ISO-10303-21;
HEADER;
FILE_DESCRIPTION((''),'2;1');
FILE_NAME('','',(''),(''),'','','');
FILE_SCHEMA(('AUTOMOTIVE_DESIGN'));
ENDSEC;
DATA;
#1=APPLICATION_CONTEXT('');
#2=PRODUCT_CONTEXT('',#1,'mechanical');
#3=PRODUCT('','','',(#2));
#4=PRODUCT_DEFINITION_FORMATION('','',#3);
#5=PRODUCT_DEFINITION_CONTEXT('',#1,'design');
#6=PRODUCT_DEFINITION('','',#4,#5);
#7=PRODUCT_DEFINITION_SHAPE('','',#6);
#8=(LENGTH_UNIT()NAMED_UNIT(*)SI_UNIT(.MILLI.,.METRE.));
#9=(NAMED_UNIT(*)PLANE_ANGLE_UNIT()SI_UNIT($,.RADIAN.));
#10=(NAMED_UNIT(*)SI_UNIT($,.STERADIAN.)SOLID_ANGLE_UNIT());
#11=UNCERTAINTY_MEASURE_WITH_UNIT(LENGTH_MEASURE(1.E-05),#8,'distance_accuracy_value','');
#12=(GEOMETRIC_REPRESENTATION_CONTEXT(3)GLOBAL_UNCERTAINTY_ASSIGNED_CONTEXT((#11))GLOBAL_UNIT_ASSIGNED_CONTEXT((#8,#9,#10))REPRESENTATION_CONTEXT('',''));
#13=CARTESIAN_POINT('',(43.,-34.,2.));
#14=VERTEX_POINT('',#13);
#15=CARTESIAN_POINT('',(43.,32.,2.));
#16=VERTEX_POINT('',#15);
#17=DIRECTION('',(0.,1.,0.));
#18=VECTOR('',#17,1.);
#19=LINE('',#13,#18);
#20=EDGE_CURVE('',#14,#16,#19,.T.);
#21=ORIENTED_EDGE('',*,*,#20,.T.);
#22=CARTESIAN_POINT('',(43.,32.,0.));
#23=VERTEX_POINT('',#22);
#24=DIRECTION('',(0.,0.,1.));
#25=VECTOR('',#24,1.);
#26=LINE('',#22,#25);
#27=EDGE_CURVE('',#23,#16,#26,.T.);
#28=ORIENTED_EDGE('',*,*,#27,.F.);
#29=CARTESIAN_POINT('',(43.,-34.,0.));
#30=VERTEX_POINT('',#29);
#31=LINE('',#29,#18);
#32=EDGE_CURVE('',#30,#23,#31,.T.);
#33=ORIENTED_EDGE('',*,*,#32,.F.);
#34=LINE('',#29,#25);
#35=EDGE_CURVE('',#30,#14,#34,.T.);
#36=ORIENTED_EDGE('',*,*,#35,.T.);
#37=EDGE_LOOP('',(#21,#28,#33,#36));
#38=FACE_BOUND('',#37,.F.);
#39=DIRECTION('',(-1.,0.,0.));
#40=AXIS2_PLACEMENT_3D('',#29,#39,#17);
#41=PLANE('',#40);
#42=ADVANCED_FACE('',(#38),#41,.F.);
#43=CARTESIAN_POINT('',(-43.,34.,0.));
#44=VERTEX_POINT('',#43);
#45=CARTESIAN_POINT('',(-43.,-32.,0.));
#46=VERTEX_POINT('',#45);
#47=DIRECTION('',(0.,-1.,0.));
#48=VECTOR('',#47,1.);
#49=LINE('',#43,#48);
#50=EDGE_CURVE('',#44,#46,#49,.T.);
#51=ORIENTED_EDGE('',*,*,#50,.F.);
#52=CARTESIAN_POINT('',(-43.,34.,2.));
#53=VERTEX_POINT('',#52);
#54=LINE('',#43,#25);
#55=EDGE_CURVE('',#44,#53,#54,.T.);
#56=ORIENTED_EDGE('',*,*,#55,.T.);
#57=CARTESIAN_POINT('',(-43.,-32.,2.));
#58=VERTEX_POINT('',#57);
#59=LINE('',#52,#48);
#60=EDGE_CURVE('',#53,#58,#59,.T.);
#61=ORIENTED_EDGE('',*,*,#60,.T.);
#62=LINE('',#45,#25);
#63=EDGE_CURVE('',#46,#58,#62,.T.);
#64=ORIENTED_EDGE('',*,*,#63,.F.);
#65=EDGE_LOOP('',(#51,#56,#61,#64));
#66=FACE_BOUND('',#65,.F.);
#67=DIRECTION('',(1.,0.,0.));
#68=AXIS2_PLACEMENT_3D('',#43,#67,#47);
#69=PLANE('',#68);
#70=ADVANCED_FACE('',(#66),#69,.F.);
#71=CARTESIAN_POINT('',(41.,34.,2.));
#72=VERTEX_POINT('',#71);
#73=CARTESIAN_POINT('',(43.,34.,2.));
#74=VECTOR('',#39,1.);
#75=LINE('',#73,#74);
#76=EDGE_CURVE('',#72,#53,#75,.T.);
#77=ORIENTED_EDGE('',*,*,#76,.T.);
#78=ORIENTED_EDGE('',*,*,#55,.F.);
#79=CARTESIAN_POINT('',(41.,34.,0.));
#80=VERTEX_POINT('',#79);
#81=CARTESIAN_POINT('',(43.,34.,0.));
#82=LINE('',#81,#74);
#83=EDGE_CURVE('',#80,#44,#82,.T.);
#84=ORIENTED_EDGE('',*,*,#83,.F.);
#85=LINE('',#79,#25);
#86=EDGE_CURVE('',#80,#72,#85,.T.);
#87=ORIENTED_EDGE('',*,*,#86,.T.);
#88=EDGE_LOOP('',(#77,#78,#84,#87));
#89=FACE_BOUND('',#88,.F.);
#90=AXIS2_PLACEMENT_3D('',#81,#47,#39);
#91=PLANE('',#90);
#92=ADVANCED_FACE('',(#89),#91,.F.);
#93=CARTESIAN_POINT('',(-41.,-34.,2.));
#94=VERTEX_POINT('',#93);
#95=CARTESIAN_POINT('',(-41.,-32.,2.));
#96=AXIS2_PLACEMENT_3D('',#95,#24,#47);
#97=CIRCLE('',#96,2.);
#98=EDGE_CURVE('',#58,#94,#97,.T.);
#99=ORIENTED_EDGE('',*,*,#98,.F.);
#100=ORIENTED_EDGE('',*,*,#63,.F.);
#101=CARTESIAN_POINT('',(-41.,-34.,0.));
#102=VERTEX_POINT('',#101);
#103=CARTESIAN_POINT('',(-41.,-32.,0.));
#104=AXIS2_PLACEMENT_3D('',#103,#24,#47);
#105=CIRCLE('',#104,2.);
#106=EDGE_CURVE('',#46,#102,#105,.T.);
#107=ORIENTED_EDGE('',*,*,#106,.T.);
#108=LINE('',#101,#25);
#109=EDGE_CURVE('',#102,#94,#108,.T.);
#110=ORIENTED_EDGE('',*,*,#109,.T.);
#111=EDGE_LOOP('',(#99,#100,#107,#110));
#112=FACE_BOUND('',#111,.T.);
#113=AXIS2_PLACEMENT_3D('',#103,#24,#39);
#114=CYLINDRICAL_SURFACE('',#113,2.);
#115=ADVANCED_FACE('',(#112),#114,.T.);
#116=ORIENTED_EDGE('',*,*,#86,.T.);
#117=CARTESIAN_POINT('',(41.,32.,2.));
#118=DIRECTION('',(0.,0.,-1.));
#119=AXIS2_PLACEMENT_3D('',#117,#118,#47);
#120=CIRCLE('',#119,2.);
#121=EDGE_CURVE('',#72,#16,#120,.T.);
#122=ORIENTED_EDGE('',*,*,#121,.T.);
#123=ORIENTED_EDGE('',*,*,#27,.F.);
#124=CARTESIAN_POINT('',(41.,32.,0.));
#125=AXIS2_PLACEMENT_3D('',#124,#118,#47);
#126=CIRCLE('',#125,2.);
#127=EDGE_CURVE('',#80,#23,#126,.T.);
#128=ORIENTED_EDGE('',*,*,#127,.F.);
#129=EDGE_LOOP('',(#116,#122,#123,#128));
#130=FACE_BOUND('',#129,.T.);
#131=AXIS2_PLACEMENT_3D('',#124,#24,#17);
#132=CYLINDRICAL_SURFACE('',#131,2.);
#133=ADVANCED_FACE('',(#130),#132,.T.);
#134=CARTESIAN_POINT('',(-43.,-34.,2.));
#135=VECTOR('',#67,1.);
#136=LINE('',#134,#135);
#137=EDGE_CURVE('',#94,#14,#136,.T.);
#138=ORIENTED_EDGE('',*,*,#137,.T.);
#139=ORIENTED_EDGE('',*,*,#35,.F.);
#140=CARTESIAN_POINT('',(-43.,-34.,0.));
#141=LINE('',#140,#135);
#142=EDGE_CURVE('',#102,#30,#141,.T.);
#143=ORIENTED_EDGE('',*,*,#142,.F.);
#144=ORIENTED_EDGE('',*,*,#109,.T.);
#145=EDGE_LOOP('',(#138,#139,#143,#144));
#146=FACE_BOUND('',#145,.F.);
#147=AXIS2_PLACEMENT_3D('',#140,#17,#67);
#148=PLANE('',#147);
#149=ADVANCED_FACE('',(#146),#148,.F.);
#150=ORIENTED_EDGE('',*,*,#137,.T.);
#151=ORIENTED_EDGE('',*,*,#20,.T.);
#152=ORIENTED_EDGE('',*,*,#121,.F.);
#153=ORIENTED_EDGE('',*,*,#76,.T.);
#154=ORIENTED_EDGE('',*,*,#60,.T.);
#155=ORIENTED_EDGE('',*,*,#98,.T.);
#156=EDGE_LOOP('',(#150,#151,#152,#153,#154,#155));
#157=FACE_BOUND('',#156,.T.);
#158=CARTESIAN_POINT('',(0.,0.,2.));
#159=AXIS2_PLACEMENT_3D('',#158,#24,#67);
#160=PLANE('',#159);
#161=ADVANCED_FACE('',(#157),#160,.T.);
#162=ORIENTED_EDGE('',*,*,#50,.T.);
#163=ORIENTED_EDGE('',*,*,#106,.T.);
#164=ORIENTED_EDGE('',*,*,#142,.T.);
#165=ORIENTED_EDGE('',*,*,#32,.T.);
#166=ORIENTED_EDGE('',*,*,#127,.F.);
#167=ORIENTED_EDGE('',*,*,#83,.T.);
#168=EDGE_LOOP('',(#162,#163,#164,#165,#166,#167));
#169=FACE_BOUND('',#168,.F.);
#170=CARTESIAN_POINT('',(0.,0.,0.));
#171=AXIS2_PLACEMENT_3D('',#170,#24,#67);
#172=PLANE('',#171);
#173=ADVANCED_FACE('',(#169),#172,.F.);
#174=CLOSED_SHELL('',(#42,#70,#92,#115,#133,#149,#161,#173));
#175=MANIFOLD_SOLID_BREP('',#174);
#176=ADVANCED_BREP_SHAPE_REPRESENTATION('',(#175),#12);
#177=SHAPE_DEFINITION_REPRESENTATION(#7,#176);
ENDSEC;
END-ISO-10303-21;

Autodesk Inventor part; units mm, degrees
ref_plane "YZ Plane" through (0, 0, 0) normal (1, 0, 0) x (0, 1, 0)
ref_plane "XZ Plane" through (0, 0, 0) normal (0, 1, 0) x (-1, 0, 0)
ref_plane "XY Plane" through (0, 0, 0) normal (0, 0, 1) x (1, 0, 0)
sketch "Sketch1" plane through (0, 0, 0) normal (0, 0, 1) x (1, 0, 0)
  line L0 (-43, -34) -> (43, -34)
  line L1 (43, -34) -> (43, 34)
  line L2 (43, 34) -> (-43, 34)
  line L3 (-43, 34) -> (-43, -34)
  line L4 (-43, -34) -> (43, 34) construction
  line L5 (43, -34) -> (-43, 34) construction
  point P0 (0, 0)
  dimension "d154" = 86
  dimension "d155" = 68
extrude "Plate5" add sketch "Sketch1" along normal blind 2
fillet "Corner Round1" radius 2 2 edges at (43, 34, 1) (-43, -34, 1)
sketch "Sketch11" plane through (-50.5, -22, -28) normal (1, 0, 0) x (0, 0, -1)
  line L0 (-25.25, 44) -> (-25.25, 0) construction
  line L1 (0, 0) -> (-25.25, 0) construction
  line L2 (0, 0) -> (0, 44) construction
  line L3 (0, 44) -> (-25.25, 44) construction
  circle A0 centre (-10, 22) radius 5.5
  point P0 (-28, 22)
  point P1 (0, 22)
  dimension "d192" = 11
  dimension "d193" = 10
cut "Cut3" [suppressed]
feature "Corner Round3" [suppressed]
sketch "Sketch10" plane through (-45, 34, 2) normal (1, 0, 0) x (0, 1, 0)
  line L0 (-66, 0) -> (0, 0)
  line L1 (0, 0) -> (0, -30)
  line L2 (0, -30) -> (-66, -30)
  line L3 (-66, -30) -> (-66, 0)
properties part number "ANP 1424 FDS diam way cup" material "Stainless Steel"
